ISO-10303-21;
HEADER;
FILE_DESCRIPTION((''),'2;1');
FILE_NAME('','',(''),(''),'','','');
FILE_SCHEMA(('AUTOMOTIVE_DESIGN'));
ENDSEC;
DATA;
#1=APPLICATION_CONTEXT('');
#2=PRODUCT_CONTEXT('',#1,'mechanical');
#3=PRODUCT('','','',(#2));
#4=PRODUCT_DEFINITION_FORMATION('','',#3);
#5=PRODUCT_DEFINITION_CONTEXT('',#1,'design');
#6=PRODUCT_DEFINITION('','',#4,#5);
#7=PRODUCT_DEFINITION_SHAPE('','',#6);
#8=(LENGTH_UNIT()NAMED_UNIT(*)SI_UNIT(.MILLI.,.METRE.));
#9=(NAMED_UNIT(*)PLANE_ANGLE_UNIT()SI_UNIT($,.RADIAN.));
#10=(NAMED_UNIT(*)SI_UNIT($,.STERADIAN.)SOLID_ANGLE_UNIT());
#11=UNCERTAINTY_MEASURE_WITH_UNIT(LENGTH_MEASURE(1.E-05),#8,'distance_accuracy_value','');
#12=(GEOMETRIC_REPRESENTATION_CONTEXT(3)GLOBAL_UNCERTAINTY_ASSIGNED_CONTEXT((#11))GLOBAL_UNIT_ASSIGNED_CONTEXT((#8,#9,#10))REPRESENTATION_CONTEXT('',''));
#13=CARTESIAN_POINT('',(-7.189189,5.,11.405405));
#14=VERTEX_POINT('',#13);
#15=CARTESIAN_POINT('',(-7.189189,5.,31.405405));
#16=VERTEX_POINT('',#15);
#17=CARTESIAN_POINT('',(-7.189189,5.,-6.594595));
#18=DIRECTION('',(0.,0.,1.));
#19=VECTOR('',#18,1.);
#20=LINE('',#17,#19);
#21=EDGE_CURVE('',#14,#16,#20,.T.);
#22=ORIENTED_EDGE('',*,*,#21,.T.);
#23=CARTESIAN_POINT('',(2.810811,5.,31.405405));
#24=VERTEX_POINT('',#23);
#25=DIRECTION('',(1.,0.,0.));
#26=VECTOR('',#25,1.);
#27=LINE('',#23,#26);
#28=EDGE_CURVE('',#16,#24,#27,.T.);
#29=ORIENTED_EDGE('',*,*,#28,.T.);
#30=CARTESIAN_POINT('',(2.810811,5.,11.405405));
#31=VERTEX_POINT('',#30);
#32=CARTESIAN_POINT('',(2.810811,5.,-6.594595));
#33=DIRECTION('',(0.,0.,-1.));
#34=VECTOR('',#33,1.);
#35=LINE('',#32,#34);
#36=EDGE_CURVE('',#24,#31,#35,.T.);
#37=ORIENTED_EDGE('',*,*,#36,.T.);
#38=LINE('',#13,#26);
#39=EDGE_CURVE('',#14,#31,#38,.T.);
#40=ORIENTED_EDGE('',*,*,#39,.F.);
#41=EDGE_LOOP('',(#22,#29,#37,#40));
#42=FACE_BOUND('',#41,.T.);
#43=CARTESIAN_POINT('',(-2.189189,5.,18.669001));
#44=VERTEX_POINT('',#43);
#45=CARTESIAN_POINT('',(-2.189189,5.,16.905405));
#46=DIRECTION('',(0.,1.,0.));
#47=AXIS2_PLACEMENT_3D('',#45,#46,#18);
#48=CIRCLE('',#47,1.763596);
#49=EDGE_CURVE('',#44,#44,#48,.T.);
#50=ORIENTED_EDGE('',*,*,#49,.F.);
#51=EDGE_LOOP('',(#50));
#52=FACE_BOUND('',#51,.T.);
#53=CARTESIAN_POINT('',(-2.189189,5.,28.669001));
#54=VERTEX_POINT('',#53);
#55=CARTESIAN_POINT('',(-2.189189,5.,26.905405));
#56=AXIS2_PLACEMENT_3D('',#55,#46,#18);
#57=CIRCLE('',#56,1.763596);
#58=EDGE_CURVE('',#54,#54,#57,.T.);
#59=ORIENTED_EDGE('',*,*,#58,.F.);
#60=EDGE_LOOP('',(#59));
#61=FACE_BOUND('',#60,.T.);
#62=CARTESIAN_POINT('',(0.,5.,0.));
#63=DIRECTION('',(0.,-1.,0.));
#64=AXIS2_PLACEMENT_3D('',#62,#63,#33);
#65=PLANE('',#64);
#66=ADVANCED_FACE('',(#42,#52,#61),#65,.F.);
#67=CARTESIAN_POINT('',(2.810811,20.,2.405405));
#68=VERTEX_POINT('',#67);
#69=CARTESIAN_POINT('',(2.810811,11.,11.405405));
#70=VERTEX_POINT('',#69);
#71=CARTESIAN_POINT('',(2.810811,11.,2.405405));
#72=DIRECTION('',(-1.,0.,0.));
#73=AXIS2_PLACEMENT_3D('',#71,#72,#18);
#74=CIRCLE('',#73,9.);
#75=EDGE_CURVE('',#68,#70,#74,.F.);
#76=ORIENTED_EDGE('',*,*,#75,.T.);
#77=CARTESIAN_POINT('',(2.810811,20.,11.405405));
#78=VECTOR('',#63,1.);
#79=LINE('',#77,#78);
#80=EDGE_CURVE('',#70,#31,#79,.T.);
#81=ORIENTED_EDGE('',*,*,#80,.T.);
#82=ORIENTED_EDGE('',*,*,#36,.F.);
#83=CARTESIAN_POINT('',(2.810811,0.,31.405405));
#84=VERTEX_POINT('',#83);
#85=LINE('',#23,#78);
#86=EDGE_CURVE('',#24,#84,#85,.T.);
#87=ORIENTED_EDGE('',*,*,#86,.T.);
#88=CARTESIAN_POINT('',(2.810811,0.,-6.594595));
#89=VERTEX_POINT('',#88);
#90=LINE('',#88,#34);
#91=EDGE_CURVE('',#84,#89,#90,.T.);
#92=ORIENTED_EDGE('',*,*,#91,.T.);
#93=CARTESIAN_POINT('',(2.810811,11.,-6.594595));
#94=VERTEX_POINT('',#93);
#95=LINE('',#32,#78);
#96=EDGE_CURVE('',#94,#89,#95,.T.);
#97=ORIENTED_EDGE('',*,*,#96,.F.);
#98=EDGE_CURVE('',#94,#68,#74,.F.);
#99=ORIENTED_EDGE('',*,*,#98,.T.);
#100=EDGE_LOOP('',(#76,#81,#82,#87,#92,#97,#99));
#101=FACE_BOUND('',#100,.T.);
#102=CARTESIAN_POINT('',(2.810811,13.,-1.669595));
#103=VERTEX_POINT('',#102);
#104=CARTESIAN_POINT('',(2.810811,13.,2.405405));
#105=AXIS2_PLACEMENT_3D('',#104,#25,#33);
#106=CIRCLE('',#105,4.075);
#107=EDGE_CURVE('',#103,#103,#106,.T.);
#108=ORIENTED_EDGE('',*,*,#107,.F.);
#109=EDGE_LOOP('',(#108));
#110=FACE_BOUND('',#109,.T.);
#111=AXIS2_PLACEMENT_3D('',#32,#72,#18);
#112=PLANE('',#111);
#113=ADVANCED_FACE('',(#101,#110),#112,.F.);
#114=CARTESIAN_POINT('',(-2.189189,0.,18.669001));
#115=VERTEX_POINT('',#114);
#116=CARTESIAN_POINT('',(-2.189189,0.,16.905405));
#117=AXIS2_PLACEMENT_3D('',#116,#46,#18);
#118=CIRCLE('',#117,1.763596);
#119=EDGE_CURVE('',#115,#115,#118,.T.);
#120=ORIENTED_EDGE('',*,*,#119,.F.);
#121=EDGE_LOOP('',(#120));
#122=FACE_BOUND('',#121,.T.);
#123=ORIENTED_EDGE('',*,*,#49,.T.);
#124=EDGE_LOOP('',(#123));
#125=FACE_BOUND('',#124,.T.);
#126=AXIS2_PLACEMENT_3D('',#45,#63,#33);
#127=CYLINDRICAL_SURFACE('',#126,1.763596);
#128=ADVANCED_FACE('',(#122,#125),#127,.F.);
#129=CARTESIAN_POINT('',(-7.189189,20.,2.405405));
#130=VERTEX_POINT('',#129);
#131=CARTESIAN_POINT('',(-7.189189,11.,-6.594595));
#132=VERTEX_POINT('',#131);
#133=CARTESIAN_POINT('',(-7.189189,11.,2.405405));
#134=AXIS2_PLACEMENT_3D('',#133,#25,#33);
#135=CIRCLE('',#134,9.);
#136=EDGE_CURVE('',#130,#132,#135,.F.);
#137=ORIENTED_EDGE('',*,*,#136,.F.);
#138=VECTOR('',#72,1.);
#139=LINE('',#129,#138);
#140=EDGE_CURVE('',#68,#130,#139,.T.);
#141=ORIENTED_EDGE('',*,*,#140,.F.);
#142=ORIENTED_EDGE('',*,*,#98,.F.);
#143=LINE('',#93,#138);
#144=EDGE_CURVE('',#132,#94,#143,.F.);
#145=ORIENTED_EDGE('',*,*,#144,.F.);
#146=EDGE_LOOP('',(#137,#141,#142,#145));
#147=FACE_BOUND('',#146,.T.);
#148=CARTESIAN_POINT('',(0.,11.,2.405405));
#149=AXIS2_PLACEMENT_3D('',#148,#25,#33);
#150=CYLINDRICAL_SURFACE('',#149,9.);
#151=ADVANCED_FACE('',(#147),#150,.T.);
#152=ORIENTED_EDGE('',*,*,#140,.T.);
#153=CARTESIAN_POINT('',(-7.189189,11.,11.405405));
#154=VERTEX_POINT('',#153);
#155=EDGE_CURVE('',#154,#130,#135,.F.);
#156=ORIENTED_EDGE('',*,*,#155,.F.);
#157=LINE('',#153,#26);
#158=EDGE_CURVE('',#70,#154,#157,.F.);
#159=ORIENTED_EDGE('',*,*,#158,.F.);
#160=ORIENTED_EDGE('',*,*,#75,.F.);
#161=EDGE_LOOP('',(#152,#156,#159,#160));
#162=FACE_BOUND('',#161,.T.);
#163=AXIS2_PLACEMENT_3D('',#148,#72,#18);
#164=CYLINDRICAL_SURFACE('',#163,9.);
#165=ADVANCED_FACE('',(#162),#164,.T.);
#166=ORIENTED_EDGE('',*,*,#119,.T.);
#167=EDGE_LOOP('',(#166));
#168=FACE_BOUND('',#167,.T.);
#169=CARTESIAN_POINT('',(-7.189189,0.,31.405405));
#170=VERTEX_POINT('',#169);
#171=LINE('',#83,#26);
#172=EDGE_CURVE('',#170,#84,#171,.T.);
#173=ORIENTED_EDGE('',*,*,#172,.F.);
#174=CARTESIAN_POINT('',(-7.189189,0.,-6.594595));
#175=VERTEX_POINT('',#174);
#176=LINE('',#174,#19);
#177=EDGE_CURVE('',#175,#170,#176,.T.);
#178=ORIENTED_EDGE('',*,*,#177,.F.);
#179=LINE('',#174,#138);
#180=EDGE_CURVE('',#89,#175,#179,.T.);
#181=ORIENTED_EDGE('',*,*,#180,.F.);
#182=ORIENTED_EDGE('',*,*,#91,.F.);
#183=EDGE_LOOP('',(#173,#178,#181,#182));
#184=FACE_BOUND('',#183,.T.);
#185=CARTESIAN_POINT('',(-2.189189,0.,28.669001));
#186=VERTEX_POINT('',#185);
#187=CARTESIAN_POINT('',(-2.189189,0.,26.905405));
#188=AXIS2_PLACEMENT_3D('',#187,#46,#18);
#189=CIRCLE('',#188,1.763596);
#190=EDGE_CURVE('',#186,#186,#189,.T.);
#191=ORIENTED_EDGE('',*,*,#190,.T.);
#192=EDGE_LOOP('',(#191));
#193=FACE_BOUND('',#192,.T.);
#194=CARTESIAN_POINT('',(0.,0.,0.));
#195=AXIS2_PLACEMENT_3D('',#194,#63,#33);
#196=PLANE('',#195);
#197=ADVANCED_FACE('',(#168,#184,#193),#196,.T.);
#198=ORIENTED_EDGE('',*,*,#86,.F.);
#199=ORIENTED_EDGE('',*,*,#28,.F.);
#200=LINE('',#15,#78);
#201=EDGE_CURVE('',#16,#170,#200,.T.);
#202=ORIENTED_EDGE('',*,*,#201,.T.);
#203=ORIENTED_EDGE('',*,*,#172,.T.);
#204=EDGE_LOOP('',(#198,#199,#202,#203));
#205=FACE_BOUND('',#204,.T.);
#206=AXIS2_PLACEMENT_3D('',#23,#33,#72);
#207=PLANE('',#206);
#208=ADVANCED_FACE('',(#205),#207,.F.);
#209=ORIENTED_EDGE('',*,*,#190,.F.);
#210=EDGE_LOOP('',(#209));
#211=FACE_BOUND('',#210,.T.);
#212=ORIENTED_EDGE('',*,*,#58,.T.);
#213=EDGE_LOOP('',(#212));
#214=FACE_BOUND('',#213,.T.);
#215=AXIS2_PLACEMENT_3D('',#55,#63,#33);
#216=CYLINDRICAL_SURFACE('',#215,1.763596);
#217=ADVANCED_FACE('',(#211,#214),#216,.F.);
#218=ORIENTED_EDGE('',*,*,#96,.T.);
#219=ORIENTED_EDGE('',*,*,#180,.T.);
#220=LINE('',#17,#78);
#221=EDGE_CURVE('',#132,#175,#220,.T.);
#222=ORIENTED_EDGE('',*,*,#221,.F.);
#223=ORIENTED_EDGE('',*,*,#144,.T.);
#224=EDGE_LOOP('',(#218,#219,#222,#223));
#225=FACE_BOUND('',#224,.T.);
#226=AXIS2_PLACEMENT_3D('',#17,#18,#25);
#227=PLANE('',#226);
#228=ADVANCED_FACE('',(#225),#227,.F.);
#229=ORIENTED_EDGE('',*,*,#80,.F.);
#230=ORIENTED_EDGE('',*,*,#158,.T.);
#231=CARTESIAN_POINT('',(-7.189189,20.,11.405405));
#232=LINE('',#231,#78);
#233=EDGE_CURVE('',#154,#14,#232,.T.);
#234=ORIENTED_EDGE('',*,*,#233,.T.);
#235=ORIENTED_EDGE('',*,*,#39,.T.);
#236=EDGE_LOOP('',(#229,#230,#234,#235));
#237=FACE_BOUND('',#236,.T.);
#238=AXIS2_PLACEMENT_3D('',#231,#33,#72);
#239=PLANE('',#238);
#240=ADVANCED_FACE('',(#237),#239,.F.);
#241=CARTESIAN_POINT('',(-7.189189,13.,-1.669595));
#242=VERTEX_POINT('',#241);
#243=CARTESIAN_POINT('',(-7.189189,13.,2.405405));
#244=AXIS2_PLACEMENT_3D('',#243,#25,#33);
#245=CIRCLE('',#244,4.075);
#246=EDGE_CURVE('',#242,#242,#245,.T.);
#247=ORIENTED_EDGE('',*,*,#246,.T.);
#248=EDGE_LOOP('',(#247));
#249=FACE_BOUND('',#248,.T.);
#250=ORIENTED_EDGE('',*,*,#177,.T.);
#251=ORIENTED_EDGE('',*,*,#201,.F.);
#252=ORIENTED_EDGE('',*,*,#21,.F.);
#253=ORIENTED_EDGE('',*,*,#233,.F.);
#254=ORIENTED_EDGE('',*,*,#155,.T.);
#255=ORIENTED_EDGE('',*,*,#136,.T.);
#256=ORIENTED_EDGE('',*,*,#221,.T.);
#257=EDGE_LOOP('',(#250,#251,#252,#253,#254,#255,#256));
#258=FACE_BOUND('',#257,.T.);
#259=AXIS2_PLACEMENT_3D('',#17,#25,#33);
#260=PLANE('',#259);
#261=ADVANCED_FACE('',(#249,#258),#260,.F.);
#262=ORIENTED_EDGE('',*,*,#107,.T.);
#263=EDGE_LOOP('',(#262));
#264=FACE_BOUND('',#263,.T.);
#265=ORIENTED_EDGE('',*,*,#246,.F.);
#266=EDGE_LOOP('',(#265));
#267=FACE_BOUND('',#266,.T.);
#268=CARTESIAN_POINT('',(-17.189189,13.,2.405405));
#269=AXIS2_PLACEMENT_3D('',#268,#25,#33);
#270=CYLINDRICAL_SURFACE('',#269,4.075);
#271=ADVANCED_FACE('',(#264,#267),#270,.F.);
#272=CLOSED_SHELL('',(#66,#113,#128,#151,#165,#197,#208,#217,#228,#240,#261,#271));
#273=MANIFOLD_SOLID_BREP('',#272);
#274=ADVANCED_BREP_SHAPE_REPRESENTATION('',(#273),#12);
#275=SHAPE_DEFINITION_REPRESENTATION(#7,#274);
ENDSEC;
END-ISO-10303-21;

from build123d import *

# Parameters (mm, degrees)
SKETCH_2_W          = 10
SKETCH_2_H          = 38
SKETCH_2_R          = 1.763596052
EXTRUDE_2_DEPTH     = 5
SKETCH_3_W          = 10
SKETCH_3_H          = 18
EXTRUDE_3_DEPTH     = 15
FILLET_1_R          = 9
SKETCH_4_R          = 4.075
CUT_EXTRUDE_1_DEPTH = 20


with BuildPart() as part:
    # 草图2 → 凸台-拉伸2 (new body)
    with BuildSketch(Plane(origin=(0, 0, 0), x_dir=(1, 0, 0), z_dir=(0, 1, 0))):
        with Locations((-2.189189189, -12.405405405)):
            Rectangle(SKETCH_2_W, SKETCH_2_H)
        with Locations(Location((-2.189189189, -26.905405405, 0), (0, 0, 270))):
            Circle(SKETCH_2_R, mode=Mode.SUBTRACT)
        with Locations(Location((-2.189189189, -16.905405405, 0), (0, 0, 270))):
            Circle(SKETCH_2_R, mode=Mode.SUBTRACT)
    extrude(amount=EXTRUDE_2_DEPTH)

    # 草图3 → 凸台-拉伸3 (add)
    with BuildSketch(Plane(origin=(0, 5, 0), x_dir=(1, 0, 0), z_dir=(0, 1, 0))):
        with Locations((-2.189189189, -2.405405405)):
            Rectangle(SKETCH_3_W, SKETCH_3_H)
    extrude(amount=EXTRUDE_3_DEPTH)

    # 圆角1
    fillet_1_edges = [part.edges().sort_by_distance(p)[0] for p in [
        (-2.189189189, 20, 11.405405405),
        (-2.189189189, 20, -6.594594595),
    ]]
    fillet(fillet_1_edges, radius=FILLET_1_R - 0.0001)  # a hair under: the kernel refuses the full size

    # 草图4 → 切除-拉伸1 (cut)
    with BuildSketch(Plane(origin=(2.810810811, 0, 0), x_dir=(0, 0, -1), z_dir=(1, 0, 0))):
        with Locations((-2.405405405, 13)):
            Circle(SKETCH_4_R)
    extrude(amount=-CUT_EXTRUDE_1_DEPTH, mode=Mode.SUBTRACT)


solid = part.part
